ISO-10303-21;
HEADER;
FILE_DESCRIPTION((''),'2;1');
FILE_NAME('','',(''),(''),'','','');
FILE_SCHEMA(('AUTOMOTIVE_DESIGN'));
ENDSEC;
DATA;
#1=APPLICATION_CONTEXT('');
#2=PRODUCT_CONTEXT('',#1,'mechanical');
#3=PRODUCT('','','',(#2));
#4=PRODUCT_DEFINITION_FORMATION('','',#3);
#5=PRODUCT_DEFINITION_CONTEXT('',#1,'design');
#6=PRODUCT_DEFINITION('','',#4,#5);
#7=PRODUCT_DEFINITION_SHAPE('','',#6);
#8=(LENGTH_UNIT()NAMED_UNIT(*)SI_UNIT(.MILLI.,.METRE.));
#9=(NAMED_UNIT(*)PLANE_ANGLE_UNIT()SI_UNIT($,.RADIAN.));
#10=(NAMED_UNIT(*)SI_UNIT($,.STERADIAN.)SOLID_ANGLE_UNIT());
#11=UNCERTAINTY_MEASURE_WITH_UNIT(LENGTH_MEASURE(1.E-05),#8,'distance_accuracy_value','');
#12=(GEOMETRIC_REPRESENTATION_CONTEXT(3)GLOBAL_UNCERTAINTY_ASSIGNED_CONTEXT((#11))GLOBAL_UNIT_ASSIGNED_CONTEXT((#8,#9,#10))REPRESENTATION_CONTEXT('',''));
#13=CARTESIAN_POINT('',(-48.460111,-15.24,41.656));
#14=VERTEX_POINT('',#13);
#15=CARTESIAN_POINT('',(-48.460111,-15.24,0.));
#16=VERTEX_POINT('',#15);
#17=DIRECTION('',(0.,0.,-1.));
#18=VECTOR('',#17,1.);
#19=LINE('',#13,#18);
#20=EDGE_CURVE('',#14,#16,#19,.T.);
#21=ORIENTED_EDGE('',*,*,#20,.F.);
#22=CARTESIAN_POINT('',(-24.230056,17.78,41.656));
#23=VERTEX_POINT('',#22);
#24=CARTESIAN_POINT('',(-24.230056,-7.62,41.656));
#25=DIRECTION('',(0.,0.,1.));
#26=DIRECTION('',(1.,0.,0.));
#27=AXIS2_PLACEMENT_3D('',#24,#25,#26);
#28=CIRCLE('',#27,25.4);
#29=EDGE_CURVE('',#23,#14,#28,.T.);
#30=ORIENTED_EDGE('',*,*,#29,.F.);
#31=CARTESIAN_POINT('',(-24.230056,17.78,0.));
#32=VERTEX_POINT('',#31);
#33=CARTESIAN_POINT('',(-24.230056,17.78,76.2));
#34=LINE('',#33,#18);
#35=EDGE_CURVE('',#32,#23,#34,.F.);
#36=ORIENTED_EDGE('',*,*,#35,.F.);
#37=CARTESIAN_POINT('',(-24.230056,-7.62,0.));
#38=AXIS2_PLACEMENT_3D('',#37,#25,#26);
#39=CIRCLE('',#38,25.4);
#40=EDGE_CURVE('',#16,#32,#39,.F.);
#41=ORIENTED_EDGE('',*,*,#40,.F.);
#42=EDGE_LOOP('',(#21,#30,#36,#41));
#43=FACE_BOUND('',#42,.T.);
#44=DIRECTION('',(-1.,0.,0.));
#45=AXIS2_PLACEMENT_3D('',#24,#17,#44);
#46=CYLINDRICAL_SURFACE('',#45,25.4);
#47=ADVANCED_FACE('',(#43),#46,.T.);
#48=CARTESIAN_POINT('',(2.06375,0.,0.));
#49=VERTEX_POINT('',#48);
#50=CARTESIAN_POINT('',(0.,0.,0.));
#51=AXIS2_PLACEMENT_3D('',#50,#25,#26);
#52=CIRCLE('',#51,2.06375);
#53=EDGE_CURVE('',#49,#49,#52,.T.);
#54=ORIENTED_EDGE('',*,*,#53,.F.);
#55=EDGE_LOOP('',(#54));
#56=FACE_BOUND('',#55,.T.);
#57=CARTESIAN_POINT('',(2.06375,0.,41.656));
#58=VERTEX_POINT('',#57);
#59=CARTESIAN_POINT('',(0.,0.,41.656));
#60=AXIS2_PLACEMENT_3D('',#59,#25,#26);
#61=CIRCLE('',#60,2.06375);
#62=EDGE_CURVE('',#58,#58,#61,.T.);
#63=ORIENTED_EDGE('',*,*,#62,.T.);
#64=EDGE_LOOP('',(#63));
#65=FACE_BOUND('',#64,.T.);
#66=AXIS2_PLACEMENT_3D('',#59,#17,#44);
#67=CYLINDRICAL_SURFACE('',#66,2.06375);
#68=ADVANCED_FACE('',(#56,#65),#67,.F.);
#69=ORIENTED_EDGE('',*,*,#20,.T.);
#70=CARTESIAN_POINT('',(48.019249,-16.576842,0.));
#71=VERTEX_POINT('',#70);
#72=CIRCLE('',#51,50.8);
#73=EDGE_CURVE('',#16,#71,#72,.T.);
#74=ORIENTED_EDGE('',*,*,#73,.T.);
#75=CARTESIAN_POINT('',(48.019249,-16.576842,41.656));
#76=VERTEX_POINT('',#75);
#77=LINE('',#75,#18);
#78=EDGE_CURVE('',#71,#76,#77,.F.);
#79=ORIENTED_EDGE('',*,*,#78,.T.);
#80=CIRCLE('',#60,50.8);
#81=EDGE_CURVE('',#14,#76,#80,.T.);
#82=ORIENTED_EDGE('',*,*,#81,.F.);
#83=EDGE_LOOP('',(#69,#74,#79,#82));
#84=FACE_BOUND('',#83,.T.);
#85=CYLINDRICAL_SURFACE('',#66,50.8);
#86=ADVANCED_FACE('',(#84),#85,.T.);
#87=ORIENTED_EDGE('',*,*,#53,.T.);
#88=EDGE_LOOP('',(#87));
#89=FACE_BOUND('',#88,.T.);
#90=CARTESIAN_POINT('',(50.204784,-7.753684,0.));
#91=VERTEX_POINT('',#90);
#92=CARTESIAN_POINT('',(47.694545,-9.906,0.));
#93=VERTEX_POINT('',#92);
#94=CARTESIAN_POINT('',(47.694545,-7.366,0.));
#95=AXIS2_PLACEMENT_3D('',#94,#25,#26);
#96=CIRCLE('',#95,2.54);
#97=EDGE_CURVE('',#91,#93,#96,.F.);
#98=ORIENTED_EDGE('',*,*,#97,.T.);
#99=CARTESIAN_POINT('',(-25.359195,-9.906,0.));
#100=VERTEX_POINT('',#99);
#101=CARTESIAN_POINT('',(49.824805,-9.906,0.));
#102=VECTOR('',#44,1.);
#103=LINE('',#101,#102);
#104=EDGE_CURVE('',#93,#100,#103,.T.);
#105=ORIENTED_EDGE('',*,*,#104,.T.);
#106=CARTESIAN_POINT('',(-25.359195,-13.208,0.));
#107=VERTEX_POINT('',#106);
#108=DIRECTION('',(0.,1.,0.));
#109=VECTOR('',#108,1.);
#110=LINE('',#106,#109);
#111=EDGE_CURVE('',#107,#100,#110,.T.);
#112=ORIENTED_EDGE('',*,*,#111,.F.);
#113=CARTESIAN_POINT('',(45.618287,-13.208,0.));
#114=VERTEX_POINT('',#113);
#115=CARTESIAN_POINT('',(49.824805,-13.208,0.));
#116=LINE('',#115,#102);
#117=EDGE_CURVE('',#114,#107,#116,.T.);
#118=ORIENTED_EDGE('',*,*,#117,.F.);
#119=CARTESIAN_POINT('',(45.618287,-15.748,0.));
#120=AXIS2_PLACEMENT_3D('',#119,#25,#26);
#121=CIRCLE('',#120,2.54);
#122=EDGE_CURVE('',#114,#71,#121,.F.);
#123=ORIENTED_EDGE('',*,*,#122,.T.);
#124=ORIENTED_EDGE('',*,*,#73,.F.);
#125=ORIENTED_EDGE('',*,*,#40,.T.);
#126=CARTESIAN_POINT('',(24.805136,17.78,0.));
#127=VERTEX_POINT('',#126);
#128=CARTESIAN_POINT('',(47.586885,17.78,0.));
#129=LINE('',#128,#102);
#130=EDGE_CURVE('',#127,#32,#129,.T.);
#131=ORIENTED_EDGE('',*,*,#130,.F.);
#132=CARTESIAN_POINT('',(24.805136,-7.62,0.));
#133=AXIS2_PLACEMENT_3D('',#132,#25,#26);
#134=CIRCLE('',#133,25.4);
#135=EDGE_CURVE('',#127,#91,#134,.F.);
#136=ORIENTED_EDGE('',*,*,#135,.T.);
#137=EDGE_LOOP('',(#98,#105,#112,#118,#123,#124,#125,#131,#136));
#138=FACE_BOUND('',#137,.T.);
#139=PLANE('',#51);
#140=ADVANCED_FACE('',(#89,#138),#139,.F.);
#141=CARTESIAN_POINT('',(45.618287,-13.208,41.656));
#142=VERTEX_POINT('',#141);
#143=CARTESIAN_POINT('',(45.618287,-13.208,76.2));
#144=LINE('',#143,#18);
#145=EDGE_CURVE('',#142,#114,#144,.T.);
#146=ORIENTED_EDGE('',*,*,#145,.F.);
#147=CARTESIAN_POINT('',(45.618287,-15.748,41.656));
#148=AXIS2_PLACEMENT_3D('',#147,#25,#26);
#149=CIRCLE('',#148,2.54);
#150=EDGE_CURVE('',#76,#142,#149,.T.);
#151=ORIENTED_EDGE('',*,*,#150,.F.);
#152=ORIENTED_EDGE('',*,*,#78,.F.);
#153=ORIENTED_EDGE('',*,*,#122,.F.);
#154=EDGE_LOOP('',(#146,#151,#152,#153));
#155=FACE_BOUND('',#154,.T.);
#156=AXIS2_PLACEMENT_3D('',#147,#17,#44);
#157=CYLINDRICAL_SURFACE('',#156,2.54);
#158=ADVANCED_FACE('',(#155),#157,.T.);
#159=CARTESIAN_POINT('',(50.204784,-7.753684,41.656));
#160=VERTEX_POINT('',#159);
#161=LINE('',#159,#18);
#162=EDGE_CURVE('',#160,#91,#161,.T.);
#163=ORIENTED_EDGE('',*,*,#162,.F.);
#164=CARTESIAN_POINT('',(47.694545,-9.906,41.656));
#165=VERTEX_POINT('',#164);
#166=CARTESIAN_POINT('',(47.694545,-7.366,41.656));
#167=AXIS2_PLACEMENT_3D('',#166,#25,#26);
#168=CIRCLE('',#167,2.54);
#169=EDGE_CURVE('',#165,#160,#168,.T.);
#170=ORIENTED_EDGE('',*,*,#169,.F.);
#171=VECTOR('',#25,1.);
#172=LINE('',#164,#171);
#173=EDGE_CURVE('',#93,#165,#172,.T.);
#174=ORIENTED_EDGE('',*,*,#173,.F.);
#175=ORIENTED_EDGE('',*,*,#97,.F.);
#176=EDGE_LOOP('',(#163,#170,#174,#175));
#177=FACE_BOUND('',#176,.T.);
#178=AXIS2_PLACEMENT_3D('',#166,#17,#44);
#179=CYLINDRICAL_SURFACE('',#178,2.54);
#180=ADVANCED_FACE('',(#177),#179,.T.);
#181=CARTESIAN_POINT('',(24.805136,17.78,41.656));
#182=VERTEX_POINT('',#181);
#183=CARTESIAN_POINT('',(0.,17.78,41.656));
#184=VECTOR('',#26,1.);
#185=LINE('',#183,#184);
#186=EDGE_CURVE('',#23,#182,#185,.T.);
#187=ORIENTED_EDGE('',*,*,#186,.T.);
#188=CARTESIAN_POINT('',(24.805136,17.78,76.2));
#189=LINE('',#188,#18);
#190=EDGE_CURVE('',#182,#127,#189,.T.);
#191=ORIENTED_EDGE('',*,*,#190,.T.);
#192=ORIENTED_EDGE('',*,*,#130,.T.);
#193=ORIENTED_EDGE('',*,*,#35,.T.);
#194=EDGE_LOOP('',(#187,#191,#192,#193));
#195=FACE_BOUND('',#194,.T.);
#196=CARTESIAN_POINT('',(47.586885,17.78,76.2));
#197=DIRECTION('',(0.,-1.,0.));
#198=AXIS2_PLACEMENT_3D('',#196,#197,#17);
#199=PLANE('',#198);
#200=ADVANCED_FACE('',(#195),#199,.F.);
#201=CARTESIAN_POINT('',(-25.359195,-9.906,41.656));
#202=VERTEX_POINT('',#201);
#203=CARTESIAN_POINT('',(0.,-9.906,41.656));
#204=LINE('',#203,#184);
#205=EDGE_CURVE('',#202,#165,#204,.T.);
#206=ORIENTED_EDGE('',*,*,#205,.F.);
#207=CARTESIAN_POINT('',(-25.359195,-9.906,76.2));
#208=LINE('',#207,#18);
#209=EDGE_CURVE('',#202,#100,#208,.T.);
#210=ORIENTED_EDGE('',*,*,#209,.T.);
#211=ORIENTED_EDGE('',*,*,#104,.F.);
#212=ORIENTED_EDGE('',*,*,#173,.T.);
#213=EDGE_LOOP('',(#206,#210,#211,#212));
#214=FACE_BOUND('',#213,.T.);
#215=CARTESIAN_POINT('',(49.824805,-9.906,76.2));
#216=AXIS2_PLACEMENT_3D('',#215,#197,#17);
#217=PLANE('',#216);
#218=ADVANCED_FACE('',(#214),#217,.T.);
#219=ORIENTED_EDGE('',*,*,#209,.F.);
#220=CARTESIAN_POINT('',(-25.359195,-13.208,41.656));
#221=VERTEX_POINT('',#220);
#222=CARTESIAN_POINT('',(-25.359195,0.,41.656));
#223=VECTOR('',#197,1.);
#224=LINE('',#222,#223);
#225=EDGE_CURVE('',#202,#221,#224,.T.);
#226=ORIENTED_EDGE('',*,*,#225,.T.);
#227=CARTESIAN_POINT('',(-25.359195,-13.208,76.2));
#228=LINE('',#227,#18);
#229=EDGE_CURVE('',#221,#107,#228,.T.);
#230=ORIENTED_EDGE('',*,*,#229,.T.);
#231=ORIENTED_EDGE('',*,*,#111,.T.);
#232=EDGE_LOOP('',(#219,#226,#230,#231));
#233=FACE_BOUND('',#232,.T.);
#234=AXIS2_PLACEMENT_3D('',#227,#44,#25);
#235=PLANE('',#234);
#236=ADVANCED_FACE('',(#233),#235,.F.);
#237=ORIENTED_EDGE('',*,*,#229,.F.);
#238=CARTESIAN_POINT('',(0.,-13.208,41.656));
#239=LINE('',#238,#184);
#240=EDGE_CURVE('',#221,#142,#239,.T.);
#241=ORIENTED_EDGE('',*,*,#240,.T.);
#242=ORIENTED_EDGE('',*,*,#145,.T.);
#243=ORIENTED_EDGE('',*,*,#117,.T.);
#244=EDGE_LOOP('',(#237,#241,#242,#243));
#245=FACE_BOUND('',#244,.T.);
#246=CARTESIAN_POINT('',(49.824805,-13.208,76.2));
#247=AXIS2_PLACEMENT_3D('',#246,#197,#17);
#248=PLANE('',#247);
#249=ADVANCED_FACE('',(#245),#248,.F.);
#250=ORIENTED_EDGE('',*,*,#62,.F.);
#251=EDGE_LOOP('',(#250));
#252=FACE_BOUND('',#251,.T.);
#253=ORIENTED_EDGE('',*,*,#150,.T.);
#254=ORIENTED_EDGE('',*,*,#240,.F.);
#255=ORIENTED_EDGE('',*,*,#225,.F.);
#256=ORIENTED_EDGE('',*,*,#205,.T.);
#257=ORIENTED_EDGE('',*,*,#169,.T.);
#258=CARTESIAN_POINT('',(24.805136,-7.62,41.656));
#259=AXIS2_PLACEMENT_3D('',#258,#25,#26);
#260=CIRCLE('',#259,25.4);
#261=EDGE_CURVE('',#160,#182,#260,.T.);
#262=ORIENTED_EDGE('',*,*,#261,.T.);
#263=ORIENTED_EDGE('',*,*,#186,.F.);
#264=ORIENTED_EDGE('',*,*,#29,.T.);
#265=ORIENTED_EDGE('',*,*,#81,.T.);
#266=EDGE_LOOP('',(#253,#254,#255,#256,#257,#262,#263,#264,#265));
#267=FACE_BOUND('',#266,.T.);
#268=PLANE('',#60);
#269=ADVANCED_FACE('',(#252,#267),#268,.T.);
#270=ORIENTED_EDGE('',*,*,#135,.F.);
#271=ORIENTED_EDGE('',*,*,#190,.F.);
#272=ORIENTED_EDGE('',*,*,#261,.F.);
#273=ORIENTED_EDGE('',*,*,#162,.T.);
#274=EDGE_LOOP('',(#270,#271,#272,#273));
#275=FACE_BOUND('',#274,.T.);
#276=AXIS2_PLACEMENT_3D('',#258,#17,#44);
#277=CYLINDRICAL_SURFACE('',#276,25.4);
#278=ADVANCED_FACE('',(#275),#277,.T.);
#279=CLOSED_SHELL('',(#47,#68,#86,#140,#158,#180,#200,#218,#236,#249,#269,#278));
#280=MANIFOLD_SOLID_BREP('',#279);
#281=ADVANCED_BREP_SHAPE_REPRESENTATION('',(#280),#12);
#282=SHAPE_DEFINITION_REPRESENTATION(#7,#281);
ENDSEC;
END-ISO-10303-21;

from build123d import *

# Parameters (mm, degrees)
SKETCH1_R           = 50.8
SKETCH1_R_2         = 2.06375
BOSS_EXTRUDE1_DEPTH = 41.656
SKETCH2_W           = 75.184
SKETCH2_H           = 3.302
SKETCH2_W_2         = 95.173769496
SKETCH2_H_2         = 48.323916003
CUT_EXTRUDE6_DEPTH  = 76.2
FILLET1_R           = 2.54
FILLET3_R           = 25.4


with BuildPart() as part:
    # Sketch1 → Boss-Extrude1 (new body)
    with BuildSketch(Plane.XY):
        Circle(SKETCH1_R)
        Circle(SKETCH1_R_2, mode=Mode.SUBTRACT)
    extrude(amount=BOSS_EXTRUDE1_DEPTH)

    # Sketch2 → Cut-Extrude6 (cut)
    with BuildSketch(Plane(origin=(0, 0, 0), x_dir=(-1, 0, 0), z_dir=(0, 0, -1))):
        with Locations((-12.232804706, -11.557)):
            Rectangle(SKETCH2_W, SKETCH2_H)
        with Locations((0, 41.941958002)):
            Rectangle(SKETCH2_W_2, SKETCH2_H_2)
    extrude(amount=-CUT_EXTRUDE6_DEPTH, mode=Mode.SUBTRACT)

    # Fillet1
    fillet1_edges = [part.edges().sort_by_distance(p)[0] for p in [
        (49.052917711, -13.208, 20.828),
        (49.824804706, -9.906, 20.828),
    ]]
    fillet(fillet1_edges, radius=FILLET1_R)

    # Fillet3
    # the kernel refuses this fillet: 25.4 mm, written as the material it takes off along each edge
    with BuildSketch(Plane(origin=(47.586884748, 17.78, -64.168841163), x_dir=(0.1019926357447357, -0.9947851538165624, 0), z_dir=(0, 0, 1))) as fillet3_piece_1:
        with BuildLine():
            CenterArc((22.943972331, -25.253558134), FILLET3_R, 83.844514986, 90.301558127)
            Line((-2.323570576, -22.662945186), (0, 0))
            ThreePointArc((0, 0), (12.833768233, 1.647844473), (25.667536465, 0))
        make_face()
    extrude(amount=169.993682325, mode=Mode.SUBTRACT)
    with BuildSketch(Plane(origin=(-47.586884748, 17.78, -82.578860977), x_dir=(1, 0, 0), z_dir=(0, 0, 1))) as fillet3_piece_2:
        with BuildLine():
            CenterArc((23.356829032, -25.4), FILLET3_R, 90, 107.457603124)
            ThreePointArc((-0.873226684, -33.02), (-3.195360858, -16.437043854), (0, 0))
            Line((0, 0), (23.356829032, 0))
        make_face()
    extrude(amount=206.813721954, mode=Mode.SUBTRACT)


solid = part.part
